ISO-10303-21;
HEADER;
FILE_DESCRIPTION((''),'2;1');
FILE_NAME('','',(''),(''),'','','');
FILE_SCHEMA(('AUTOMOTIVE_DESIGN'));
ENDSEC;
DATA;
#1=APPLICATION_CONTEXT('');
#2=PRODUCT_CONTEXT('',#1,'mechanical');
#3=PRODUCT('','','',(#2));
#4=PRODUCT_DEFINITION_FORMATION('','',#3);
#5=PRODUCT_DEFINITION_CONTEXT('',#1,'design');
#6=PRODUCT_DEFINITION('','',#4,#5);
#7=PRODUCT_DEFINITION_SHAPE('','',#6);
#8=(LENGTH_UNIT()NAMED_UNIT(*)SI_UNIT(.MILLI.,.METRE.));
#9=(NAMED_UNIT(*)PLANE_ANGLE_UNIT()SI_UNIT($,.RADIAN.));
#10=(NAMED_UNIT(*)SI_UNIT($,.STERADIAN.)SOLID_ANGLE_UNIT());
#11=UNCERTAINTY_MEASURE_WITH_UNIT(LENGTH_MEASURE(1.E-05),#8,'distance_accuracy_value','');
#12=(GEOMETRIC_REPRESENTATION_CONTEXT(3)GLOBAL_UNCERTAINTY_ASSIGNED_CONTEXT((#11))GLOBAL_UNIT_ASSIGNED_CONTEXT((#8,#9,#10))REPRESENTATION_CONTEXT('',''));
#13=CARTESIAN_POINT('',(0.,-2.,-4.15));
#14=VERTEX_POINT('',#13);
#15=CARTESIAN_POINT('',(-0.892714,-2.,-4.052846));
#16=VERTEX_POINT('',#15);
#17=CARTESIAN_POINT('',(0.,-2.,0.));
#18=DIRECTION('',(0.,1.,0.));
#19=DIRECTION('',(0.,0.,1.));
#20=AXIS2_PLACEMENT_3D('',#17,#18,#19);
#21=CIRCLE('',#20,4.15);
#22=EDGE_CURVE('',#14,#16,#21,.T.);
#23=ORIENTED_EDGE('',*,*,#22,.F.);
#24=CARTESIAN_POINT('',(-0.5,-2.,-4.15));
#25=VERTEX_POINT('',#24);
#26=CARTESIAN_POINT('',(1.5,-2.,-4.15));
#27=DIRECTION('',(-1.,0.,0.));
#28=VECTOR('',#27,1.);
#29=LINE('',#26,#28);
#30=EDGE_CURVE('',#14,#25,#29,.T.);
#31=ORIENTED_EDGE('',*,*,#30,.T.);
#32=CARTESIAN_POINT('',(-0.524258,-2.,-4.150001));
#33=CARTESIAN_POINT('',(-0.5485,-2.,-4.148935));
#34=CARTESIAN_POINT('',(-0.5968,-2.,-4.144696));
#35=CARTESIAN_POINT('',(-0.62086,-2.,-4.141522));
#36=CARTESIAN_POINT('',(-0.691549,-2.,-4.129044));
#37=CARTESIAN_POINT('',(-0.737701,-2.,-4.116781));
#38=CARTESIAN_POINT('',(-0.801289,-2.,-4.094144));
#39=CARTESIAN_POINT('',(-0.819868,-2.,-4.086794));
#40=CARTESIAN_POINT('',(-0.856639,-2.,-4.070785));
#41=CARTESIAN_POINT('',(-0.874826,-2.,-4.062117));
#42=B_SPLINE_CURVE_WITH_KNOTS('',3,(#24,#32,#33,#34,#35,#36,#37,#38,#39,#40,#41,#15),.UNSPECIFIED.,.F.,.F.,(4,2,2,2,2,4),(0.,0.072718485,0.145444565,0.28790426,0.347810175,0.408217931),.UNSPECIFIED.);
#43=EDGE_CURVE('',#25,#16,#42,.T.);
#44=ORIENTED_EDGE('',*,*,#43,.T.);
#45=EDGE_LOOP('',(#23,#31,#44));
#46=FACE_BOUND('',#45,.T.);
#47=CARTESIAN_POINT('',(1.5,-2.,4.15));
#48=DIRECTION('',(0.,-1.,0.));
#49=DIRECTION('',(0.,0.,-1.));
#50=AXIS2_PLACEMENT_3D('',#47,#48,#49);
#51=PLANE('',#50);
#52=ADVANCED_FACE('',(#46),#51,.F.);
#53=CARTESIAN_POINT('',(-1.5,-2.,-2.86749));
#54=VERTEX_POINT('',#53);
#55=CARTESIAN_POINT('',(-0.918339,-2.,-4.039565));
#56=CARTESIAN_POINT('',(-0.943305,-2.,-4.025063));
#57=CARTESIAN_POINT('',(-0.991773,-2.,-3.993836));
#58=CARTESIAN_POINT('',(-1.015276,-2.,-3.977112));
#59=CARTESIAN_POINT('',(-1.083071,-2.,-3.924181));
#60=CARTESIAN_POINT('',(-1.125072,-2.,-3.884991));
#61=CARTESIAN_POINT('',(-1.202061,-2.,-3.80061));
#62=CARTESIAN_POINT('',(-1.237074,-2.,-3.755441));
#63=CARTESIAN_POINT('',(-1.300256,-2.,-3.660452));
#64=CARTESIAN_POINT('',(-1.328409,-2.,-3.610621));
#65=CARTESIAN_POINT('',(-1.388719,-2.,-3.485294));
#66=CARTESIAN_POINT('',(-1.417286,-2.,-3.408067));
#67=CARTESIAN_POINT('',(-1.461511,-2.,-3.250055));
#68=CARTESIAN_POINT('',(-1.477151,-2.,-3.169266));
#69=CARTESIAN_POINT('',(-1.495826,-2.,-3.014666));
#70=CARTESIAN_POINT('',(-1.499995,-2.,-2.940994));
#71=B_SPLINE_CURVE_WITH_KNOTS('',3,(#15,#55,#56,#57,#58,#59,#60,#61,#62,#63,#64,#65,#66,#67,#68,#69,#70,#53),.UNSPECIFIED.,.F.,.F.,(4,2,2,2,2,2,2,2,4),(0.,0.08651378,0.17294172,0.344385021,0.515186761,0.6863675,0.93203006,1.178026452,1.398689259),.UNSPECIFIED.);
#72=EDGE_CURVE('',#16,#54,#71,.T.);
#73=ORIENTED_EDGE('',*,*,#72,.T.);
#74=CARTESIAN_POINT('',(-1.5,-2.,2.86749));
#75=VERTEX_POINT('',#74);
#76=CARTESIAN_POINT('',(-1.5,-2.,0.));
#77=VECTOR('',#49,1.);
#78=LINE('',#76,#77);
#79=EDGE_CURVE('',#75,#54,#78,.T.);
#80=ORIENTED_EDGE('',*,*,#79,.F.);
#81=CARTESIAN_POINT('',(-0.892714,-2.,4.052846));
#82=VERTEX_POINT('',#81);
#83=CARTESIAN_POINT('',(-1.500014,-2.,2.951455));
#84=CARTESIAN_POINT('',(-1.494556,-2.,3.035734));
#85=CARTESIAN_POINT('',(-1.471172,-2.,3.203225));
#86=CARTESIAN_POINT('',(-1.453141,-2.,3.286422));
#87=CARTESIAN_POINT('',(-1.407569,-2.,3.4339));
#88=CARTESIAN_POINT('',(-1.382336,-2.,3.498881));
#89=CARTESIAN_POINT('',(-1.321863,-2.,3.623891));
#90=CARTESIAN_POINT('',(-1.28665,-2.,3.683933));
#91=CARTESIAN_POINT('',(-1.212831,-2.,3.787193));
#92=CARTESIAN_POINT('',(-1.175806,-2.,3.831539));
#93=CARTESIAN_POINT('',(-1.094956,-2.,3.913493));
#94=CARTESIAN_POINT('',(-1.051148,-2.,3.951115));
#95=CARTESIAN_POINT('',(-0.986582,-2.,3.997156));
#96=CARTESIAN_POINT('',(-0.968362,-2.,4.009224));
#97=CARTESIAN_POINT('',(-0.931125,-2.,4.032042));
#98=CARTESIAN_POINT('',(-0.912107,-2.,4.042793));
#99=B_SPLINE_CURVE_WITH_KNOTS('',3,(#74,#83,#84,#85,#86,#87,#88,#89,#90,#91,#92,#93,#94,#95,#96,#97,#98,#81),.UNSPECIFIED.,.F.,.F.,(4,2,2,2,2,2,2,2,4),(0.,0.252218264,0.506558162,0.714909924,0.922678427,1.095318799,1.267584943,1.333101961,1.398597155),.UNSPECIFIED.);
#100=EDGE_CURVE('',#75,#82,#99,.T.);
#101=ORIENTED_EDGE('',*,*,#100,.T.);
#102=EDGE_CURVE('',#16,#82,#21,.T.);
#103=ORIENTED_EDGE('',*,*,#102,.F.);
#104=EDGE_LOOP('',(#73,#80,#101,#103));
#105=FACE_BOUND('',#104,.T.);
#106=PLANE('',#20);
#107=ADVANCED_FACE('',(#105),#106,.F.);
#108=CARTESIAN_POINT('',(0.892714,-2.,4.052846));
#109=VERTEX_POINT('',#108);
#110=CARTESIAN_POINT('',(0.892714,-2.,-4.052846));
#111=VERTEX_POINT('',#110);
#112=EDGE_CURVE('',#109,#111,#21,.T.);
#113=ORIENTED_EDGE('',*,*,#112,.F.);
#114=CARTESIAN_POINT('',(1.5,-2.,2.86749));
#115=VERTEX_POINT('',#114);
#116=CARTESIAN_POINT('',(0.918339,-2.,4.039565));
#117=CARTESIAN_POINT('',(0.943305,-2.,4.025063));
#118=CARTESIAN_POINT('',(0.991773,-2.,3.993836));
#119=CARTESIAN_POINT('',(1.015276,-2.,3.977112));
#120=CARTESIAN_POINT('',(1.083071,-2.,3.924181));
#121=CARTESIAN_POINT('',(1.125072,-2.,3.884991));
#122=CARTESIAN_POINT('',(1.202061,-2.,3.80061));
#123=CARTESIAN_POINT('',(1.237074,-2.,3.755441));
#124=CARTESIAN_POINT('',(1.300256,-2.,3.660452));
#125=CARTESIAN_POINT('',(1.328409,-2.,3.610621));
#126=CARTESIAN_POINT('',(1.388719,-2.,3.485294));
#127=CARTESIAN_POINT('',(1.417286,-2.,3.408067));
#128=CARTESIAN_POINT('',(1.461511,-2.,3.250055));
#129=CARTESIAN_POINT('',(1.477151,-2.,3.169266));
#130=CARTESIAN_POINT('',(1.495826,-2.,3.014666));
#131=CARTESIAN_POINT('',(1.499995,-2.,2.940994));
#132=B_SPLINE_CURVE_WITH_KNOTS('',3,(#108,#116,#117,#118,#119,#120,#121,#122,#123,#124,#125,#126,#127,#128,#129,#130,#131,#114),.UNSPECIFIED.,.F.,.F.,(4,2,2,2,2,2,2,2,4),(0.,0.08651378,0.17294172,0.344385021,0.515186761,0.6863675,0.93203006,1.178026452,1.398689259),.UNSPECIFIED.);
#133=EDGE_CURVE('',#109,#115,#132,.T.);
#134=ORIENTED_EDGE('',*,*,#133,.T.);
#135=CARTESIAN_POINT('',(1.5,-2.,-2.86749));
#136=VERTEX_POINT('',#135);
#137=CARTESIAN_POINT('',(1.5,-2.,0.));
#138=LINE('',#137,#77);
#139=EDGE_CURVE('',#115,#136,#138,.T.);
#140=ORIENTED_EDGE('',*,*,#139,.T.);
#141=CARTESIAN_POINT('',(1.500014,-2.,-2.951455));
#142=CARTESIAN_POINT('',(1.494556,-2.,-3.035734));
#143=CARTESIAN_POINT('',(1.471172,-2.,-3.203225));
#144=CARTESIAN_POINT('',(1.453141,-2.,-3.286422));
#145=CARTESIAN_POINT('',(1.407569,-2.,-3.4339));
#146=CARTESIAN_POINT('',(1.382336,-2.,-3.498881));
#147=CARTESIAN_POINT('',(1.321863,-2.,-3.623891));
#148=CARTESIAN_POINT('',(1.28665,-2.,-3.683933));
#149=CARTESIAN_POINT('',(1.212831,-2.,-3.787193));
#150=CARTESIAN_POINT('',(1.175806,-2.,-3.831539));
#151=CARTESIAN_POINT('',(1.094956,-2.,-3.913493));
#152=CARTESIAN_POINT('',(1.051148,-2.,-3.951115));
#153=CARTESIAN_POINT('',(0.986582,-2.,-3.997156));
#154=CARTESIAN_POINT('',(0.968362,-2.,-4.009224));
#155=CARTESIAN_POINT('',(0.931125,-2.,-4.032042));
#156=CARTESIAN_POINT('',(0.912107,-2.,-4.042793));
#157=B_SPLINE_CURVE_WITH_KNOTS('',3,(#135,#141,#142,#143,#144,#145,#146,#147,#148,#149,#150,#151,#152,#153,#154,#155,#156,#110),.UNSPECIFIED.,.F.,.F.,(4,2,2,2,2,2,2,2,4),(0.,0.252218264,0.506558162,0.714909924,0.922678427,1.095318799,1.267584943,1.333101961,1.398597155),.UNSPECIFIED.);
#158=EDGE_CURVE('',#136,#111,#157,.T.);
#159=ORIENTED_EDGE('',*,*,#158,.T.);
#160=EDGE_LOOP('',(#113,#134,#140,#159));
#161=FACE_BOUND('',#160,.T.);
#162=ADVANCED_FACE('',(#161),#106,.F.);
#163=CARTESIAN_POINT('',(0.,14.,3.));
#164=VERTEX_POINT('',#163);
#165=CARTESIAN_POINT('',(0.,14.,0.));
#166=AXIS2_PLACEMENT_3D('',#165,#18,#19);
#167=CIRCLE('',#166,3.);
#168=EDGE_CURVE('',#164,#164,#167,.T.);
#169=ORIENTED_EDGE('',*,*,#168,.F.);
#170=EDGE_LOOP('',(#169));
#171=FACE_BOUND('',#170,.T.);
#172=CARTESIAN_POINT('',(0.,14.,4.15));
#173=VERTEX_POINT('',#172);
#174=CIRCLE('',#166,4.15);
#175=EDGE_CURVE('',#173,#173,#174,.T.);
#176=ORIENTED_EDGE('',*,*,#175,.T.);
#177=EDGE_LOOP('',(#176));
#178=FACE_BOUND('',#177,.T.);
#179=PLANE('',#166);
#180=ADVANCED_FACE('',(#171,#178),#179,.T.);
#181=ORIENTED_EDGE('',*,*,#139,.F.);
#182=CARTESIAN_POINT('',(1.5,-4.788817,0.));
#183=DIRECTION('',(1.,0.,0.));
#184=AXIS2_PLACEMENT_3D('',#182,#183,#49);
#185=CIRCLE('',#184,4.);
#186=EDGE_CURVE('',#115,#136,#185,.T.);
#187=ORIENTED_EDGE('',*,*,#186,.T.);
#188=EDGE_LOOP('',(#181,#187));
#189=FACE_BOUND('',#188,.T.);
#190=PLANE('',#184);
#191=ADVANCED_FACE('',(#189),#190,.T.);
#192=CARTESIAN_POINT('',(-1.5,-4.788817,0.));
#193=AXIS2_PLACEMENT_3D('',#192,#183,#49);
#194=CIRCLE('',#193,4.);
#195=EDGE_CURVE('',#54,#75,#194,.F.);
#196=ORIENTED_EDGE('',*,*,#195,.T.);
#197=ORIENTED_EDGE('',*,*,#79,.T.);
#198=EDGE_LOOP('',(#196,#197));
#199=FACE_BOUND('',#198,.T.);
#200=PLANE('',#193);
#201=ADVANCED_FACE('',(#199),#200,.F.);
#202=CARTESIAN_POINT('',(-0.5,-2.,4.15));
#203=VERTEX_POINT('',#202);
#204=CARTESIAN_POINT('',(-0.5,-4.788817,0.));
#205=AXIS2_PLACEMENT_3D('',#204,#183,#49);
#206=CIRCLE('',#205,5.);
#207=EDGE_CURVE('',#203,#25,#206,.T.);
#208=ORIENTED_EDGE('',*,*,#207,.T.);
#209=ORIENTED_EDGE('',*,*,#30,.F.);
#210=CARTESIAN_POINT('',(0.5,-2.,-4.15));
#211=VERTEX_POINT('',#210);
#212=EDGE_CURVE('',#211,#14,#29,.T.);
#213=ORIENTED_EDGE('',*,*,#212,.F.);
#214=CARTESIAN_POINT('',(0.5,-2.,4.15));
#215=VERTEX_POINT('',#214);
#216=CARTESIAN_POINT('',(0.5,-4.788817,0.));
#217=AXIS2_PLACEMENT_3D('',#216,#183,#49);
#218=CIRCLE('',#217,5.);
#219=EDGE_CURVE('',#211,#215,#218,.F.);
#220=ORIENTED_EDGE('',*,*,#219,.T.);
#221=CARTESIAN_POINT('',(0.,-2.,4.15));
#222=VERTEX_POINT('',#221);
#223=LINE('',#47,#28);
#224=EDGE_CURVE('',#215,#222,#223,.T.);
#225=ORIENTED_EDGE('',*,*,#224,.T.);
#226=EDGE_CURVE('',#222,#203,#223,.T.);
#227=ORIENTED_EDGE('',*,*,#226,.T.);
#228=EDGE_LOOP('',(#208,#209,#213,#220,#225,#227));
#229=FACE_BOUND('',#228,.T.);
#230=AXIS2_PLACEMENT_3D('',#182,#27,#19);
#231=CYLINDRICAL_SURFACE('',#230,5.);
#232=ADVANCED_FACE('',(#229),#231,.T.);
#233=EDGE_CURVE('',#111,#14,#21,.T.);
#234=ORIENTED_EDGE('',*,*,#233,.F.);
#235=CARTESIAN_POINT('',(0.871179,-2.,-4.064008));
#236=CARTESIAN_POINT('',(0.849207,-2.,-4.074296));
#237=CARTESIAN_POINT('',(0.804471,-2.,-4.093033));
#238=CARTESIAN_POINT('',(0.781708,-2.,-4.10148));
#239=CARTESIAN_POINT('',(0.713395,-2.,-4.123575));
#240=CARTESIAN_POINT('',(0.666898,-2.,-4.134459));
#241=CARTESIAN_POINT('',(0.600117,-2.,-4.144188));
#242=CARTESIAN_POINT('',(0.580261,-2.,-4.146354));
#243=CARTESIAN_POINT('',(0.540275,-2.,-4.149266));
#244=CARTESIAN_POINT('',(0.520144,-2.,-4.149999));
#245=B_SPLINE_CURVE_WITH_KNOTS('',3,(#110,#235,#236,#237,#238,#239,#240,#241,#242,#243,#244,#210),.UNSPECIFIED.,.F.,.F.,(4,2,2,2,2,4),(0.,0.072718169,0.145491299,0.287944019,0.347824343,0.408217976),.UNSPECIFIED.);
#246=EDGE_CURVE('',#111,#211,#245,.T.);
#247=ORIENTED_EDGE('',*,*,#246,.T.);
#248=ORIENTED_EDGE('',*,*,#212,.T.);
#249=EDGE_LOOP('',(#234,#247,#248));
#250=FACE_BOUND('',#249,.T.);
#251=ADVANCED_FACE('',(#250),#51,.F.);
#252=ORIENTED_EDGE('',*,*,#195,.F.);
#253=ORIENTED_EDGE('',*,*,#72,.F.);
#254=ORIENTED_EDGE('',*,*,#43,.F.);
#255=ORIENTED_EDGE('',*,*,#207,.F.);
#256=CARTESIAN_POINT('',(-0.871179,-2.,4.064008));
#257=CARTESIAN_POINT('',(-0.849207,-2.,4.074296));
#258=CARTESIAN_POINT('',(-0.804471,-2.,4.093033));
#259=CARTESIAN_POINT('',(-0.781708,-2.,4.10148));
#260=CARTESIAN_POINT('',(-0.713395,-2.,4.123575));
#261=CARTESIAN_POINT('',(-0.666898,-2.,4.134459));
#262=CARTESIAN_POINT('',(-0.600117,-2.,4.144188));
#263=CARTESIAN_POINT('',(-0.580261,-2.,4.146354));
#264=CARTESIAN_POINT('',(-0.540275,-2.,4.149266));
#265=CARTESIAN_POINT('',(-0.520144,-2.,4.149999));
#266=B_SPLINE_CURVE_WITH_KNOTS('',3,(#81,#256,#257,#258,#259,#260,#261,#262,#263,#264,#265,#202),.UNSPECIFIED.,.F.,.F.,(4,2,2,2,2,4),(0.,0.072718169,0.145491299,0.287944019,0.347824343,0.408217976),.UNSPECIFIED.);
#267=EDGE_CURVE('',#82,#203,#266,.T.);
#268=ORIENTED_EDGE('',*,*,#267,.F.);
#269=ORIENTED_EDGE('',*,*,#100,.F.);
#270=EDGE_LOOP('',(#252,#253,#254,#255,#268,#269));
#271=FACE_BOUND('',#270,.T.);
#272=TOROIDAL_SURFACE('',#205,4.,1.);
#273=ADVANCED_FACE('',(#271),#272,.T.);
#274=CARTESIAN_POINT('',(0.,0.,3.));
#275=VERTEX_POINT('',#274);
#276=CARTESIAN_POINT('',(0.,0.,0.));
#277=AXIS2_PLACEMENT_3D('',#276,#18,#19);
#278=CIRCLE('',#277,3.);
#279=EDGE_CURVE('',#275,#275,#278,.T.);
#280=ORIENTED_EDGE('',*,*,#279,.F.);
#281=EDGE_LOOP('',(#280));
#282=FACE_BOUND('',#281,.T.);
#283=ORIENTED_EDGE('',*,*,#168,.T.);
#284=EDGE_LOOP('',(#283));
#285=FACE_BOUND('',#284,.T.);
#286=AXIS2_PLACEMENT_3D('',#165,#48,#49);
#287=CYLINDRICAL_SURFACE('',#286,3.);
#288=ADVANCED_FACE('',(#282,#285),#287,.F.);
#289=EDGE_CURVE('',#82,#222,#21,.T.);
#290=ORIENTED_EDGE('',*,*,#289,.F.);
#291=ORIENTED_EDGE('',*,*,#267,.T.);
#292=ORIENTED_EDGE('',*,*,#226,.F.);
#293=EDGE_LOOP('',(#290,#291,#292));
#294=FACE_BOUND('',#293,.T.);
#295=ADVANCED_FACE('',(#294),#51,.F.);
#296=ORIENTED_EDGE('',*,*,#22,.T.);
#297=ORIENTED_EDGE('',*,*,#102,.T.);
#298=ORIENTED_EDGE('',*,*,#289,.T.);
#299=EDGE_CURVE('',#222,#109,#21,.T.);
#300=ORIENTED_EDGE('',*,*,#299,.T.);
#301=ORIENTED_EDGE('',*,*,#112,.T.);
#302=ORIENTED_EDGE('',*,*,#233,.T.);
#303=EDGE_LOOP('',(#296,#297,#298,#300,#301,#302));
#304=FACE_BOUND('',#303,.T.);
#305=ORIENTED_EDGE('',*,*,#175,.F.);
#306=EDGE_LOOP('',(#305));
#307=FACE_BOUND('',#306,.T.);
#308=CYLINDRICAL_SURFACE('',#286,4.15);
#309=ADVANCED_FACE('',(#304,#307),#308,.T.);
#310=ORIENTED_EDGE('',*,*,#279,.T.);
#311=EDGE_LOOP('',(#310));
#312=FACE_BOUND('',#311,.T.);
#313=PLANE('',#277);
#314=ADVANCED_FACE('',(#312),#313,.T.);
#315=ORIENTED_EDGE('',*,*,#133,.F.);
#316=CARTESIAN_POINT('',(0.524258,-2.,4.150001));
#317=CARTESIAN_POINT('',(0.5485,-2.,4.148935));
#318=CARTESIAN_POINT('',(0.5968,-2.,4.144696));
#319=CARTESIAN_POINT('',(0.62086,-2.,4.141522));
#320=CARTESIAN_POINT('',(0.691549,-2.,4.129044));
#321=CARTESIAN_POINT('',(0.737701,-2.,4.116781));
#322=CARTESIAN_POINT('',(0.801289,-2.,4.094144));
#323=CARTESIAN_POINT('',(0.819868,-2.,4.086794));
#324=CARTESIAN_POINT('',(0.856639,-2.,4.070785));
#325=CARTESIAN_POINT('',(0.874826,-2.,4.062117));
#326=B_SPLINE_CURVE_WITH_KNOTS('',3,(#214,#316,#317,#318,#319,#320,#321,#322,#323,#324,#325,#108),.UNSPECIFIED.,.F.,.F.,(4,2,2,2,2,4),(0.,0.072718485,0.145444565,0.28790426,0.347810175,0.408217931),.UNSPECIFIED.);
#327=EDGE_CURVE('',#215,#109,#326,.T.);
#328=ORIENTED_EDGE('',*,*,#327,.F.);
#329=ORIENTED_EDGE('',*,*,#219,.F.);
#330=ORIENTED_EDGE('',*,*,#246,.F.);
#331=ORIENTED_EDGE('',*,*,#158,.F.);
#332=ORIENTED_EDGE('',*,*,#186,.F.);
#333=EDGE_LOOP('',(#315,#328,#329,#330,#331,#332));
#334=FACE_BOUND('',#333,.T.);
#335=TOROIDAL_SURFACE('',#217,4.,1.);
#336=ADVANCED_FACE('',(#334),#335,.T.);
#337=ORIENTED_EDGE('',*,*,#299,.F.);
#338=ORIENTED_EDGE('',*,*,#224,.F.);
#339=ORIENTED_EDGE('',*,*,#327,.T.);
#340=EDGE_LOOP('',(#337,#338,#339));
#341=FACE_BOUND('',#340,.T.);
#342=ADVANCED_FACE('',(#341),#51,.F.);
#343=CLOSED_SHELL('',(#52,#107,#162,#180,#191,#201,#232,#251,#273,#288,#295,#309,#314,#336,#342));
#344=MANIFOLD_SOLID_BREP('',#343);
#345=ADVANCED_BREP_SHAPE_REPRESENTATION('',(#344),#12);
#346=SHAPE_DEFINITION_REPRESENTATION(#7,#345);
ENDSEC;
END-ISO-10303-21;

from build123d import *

# Parameters (mm, degrees)
SKETCH1_R           = 4.15
SKETCH1_R_2         = 3
BOSS_EXTRUDE1_DEPTH = 14
BOSS_EXTRUDE2_START = -2
SKETCH1_2_R         = 4.15
SKETCH1_2_R_2       = 3
BOSS_EXTRUDE2_DEPTH = 2
BOSS_EXTRUDE3_DEPTH = 1.5
FILLET1_R           = 1


with BuildPart() as part:
    # Sketch1 → Boss-Extrude1 (new body)
    with BuildSketch(Plane(origin=(0, 0, 0), x_dir=(1, 0, 0), z_dir=(0, 1, 0))):
        with Locations(Location((0, 0, 0), (0, 0, 270))):
            Circle(SKETCH1_R)
        with Locations(Location((0, 0, 0), (0, 0, 270))):
            Circle(SKETCH1_R_2, mode=Mode.SUBTRACT)
    extrude(amount=BOSS_EXTRUDE1_DEPTH)

    # Sketch1<2> → Boss-Extrude2 (add)
    # profile 1 of 2: a face of its own
    with BuildSketch(Plane(origin=(0, 0, 0), x_dir=(1, 0, 0), z_dir=(0, 1, 0)).offset(BOSS_EXTRUDE2_START)):
        with Locations(Location((0, 0, 0), (0, 0, 270))):
            Circle(SKETCH1_2_R)
        with Locations(Location((0, 0, 0), (0, 0, 270))):
            Circle(SKETCH1_2_R_2, mode=Mode.SUBTRACT)
    # profile 2 of 2: a face of its own
    with BuildSketch(Plane(origin=(0, 0, 0), x_dir=(1, 0, 0), z_dir=(0, 1, 0)).offset(BOSS_EXTRUDE2_START)):
        with Locations(Location((0, 0, 0), (0, 0, 270))):
            Circle(SKETCH1_2_R_2)
    extrude(amount=BOSS_EXTRUDE2_DEPTH)

    # Sketch3 → Boss-Extrude3 (add, symmetric)
    with BuildSketch(Plane(origin=(0, 0, 0), x_dir=(0, 0, -1), z_dir=(1, 0, 0))):
        with BuildLine():
            Line((-4.15, -2), (4.15, -2))
            ThreePointArc((4.15, -2), (0, -9.788816953), (-4.15, -2))
        make_face()
    extrude(amount=BOSS_EXTRUDE3_DEPTH, both=True)

    # Fillet1
    # the kernel refuses this fillet: 1 mm, written as the material it takes off along each edge
    with BuildSketch(Plane(origin=(-1.5, -4.788816953, 0), x_dir=(0, 0.8881088245588202, -0.45963324046542875), z_dir=(0, 0.45963324046542875, 0.8881088245588202))) as fillet1_piece_1_section:
        with BuildLine():
            CenterArc((5 - FILLET1_R, -FILLET1_R), FILLET1_R, 0, 90)
            Line((5 - FILLET1_R, 0), (5, 0))
            Line((5, 0), (5, -FILLET1_R))
        make_face()
    fillet1_piece_1 = revolve(axis=Axis((-1.5, -4.788816953, 0), (-1, 0, 0)), revolution_arc=305.273112573, mode=Mode.PRIVATE)
    fillet1_piece_1 = split(fillet1_piece_1, bisect_by=Plane(origin=(-1.219469411, -2, 0), z_dir=(0, -1, 0)), keep=Keep.TOP, mode=Mode.PRIVATE)
    add(fillet1_piece_1, mode=Mode.SUBTRACT)
    with BuildSketch(Plane(origin=(1.5, -4.788816953, 0), x_dir=(0, 0.8881088245588202, -0.45963324046542875), z_dir=(0, 0.45963324046542875, 0.8881088245588202))) as fillet1_piece_2_section:
        with BuildLine():
            CenterArc((5 - FILLET1_R, FILLET1_R), FILLET1_R, 270, 90)
            Line((5 - FILLET1_R, 0), (5, 0))
            Line((5, 0), (5, FILLET1_R))
        make_face()
    fillet1_piece_2 = revolve(axis=Axis((1.5, -4.788816953, 0), (-1, 0, 0)), revolution_arc=305.273112573, mode=Mode.PRIVATE)
    fillet1_piece_2 = split(fillet1_piece_2, bisect_by=Plane(origin=(1.219469411, -2, 0), z_dir=(0, -1, 0)), keep=Keep.TOP, mode=Mode.PRIVATE)
    add(fillet1_piece_2, mode=Mode.SUBTRACT)


solid = part.part
